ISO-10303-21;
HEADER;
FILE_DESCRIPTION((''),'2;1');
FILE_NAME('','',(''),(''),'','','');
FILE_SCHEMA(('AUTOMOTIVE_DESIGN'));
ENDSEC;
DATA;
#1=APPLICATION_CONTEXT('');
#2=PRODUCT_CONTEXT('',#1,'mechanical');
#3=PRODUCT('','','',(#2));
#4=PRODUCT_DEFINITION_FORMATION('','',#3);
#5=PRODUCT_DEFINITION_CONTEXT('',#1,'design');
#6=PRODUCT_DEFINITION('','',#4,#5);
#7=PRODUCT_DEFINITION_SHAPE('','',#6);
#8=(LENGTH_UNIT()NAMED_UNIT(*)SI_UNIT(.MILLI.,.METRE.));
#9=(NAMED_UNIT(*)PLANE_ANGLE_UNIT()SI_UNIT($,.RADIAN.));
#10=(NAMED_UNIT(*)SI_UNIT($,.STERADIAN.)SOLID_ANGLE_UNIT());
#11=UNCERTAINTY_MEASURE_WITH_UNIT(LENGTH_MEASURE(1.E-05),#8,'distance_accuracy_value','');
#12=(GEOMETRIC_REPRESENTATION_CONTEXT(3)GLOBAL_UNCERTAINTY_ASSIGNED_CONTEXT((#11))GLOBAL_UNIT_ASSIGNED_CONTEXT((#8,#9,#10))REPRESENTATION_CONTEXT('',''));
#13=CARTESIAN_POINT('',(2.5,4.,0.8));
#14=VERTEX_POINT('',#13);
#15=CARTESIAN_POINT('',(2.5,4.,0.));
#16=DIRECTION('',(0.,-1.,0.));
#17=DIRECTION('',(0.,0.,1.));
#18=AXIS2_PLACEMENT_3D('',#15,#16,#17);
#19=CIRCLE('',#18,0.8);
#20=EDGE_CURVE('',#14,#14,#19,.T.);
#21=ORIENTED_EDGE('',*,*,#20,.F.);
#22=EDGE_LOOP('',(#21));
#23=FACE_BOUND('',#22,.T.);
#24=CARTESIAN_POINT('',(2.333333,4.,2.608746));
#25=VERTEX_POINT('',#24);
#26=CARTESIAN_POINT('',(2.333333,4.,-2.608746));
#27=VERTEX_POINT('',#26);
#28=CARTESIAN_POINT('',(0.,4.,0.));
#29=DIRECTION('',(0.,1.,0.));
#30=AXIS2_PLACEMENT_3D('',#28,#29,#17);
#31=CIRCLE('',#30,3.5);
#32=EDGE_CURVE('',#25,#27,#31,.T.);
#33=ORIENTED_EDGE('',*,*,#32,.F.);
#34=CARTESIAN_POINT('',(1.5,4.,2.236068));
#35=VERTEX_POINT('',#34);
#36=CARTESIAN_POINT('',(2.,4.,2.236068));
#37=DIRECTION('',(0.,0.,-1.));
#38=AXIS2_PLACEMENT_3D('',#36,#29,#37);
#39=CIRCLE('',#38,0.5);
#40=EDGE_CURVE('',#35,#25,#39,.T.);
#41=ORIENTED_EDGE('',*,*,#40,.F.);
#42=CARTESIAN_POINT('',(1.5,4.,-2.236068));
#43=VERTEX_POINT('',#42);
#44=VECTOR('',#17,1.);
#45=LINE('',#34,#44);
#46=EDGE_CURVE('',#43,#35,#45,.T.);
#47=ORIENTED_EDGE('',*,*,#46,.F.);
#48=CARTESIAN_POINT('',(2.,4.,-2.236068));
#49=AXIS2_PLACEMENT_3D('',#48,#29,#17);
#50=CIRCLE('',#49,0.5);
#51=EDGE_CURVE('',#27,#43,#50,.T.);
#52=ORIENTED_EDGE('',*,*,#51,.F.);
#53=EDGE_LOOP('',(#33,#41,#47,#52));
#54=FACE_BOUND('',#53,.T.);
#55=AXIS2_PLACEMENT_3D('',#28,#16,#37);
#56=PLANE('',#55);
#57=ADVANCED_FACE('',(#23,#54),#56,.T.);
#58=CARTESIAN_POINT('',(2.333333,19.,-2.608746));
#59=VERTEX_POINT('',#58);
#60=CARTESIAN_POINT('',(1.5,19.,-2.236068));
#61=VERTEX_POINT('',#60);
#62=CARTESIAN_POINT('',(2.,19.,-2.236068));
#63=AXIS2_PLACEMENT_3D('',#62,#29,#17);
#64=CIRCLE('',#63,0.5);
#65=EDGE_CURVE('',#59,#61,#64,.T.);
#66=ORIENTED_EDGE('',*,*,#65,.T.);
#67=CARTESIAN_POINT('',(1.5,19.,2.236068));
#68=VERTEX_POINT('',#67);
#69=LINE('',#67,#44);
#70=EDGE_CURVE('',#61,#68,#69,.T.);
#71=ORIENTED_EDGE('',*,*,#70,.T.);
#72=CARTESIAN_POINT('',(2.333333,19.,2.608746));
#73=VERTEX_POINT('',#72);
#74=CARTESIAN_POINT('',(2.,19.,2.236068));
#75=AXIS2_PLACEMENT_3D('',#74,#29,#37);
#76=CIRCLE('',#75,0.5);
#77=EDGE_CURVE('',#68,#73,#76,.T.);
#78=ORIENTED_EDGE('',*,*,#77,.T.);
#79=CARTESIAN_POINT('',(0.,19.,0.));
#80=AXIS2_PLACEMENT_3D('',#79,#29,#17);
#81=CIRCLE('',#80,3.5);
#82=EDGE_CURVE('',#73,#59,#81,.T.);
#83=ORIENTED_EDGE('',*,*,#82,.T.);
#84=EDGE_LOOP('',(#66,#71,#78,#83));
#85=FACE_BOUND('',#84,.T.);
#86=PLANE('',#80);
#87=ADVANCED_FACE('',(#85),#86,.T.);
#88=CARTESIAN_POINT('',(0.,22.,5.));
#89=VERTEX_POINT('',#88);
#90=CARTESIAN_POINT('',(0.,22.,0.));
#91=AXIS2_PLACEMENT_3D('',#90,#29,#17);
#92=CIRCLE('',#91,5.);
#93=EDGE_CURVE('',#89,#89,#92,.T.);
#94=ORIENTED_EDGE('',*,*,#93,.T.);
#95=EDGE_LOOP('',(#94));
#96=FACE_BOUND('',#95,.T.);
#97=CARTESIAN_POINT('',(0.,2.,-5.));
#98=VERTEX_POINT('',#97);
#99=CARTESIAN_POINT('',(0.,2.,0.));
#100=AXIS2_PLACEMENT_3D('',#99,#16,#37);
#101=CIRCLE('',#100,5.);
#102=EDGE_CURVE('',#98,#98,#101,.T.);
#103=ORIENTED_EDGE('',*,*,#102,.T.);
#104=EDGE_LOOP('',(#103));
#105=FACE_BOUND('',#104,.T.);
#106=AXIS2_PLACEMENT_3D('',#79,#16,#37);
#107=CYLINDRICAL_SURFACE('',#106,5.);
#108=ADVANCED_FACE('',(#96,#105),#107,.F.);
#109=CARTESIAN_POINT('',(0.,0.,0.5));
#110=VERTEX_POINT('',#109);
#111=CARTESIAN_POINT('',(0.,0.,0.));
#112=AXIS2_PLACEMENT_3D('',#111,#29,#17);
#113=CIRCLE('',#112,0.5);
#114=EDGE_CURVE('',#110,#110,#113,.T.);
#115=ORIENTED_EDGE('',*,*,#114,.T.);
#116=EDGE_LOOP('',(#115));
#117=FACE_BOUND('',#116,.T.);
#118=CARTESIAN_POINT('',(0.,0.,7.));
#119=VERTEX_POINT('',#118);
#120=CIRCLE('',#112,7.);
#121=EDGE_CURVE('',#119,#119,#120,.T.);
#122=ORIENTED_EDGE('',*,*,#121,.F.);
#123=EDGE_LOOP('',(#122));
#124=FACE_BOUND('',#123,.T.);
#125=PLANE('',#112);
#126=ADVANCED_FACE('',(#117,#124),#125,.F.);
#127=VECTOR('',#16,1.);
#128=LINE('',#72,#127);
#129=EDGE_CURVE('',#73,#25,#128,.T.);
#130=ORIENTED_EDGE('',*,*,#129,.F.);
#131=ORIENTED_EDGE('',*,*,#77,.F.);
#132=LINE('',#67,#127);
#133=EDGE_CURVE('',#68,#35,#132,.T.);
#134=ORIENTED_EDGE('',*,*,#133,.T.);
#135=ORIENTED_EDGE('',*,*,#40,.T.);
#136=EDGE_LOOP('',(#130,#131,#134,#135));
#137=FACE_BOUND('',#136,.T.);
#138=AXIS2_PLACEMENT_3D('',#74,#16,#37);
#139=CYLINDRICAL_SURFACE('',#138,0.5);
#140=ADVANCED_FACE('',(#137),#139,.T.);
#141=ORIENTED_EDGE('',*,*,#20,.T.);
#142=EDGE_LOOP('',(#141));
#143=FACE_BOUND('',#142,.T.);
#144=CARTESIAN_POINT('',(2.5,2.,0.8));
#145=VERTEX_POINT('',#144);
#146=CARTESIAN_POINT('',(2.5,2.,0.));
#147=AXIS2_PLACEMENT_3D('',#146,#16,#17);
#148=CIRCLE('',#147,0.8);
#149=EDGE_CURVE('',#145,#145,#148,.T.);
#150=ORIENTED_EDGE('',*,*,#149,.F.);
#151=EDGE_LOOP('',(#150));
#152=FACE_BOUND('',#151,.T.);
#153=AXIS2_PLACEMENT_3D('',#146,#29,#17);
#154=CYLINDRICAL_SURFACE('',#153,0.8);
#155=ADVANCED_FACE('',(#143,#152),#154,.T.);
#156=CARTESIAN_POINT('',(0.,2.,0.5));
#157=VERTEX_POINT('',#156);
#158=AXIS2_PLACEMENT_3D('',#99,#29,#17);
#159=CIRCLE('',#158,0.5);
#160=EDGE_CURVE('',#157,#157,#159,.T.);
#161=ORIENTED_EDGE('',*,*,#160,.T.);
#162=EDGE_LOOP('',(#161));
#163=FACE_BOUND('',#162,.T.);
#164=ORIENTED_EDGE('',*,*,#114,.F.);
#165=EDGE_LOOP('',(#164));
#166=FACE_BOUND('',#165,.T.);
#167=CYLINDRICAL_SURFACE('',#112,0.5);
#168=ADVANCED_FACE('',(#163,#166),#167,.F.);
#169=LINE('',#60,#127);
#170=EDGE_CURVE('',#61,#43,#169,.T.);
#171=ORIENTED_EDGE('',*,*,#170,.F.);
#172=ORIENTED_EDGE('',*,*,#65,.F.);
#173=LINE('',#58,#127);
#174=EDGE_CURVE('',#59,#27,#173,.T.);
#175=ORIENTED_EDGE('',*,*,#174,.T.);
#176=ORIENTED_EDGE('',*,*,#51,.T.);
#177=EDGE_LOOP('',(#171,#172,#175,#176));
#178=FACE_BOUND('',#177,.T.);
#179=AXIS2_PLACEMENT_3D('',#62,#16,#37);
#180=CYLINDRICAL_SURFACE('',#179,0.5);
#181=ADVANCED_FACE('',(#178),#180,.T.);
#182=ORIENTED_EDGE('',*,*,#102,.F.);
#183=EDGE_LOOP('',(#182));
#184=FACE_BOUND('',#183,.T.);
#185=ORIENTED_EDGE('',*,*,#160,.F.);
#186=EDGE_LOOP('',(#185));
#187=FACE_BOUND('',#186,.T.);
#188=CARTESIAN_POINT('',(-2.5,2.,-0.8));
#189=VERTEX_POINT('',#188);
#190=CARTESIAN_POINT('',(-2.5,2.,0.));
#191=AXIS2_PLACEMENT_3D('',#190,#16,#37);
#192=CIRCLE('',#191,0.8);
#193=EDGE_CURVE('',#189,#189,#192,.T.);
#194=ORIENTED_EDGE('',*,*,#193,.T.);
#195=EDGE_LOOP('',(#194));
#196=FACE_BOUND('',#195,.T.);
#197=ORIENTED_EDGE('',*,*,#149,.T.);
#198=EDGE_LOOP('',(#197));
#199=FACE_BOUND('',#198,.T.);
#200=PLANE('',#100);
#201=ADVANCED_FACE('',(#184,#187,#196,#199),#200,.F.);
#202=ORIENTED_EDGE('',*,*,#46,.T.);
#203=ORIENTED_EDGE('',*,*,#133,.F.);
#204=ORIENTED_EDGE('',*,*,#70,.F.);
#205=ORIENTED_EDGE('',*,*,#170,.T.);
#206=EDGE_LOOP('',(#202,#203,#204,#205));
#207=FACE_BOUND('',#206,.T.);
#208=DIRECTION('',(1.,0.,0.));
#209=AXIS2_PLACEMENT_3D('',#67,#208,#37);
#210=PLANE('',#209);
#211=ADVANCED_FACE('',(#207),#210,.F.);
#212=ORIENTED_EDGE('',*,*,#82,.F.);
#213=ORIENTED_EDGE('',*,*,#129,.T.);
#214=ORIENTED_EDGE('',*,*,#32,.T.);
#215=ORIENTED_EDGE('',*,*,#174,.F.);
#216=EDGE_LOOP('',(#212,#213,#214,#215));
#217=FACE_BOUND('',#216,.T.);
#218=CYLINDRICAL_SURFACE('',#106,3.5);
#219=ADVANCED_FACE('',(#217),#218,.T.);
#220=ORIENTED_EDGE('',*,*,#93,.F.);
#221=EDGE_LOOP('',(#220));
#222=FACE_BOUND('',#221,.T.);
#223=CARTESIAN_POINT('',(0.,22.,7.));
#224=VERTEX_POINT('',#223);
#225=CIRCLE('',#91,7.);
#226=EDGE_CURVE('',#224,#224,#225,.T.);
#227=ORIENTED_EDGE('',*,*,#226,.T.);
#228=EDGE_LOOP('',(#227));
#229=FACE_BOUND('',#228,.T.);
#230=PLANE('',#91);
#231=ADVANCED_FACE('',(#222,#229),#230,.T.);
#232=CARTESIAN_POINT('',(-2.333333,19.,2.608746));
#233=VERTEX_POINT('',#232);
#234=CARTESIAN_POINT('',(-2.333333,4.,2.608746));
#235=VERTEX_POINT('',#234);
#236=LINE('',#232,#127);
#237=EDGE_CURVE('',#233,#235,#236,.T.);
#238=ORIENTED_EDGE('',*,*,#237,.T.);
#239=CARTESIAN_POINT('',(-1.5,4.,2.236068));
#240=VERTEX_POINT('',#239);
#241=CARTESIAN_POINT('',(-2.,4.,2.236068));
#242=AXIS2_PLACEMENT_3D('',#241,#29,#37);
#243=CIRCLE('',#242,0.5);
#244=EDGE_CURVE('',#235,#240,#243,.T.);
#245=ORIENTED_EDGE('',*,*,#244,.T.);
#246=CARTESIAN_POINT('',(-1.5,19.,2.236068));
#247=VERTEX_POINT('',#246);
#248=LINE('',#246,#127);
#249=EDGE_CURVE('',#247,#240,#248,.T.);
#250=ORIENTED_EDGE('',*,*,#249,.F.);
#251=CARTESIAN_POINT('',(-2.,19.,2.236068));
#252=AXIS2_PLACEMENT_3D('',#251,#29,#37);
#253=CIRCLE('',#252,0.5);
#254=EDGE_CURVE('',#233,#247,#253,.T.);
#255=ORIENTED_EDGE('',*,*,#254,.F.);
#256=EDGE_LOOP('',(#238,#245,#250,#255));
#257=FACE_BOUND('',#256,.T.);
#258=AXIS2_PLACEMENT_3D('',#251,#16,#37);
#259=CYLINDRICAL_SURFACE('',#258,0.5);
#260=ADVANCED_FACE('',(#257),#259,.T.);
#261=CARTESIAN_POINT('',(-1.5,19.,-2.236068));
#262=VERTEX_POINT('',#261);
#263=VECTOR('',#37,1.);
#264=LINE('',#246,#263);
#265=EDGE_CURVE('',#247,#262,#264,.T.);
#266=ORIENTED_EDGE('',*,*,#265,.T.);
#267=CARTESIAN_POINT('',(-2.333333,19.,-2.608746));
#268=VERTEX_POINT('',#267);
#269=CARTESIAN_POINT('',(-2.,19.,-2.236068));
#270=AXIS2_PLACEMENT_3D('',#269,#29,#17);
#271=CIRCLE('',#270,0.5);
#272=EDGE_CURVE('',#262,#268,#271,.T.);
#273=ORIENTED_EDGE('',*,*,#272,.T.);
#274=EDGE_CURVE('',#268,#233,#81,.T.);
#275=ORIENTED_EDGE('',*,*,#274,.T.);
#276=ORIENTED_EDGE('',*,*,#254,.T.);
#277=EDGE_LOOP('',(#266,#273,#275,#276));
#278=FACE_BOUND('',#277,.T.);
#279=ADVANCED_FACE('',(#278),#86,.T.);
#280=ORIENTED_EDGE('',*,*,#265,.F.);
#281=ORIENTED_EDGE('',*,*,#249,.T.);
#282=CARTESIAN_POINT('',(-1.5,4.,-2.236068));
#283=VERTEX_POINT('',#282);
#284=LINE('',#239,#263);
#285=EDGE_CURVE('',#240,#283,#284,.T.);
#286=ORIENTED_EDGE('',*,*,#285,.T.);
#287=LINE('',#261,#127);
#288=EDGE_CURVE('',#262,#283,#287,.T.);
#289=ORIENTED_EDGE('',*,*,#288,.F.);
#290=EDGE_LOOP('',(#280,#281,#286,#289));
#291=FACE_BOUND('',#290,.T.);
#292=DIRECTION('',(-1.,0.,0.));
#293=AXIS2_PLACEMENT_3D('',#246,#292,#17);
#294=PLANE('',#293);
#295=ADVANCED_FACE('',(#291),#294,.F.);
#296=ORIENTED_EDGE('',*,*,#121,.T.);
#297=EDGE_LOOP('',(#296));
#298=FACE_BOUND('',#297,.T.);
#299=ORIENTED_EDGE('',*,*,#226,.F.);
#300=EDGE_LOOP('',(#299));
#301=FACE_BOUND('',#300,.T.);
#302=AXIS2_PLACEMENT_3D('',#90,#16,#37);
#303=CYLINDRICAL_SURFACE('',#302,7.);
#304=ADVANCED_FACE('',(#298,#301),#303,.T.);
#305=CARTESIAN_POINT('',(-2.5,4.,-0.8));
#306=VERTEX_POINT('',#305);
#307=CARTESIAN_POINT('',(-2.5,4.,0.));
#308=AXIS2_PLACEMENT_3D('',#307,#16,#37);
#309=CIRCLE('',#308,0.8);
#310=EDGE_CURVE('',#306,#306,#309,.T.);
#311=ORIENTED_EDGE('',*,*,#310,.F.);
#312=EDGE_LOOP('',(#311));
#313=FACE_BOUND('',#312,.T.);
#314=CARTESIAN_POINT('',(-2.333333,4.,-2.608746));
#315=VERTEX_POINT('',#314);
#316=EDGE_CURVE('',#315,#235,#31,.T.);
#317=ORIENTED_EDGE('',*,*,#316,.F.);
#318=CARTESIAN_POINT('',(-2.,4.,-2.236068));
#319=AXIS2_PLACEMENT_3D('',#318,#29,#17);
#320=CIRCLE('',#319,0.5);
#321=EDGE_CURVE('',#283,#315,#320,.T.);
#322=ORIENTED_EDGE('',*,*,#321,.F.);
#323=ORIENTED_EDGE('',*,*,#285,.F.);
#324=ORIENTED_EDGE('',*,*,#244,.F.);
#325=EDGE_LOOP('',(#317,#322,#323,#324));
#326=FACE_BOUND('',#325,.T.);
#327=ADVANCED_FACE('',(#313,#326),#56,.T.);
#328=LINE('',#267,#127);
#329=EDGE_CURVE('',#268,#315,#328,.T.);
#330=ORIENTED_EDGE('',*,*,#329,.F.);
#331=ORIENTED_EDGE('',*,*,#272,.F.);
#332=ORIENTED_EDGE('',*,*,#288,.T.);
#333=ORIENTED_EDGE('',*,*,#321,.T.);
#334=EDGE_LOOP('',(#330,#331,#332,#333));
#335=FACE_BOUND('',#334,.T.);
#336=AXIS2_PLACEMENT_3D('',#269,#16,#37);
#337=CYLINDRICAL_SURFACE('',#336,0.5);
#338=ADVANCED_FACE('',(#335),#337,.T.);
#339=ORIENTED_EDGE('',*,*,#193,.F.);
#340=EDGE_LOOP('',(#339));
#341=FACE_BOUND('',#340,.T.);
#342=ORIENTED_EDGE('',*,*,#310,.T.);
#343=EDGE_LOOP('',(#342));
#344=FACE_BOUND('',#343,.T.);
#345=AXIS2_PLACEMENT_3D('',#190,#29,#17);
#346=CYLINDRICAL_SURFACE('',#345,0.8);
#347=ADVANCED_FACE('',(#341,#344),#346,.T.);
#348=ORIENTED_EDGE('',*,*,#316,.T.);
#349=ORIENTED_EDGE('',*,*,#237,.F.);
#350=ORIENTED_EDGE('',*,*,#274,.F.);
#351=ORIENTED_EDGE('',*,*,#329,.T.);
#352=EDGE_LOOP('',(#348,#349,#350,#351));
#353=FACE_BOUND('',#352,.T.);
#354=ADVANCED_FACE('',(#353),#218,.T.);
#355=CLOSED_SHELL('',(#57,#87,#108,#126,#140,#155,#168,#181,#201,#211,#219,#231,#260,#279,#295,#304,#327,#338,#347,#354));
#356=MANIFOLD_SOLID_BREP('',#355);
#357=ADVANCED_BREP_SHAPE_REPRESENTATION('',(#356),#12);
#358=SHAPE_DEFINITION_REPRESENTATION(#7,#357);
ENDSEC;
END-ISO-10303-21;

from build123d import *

# Parameters (mm, degrees)
SKETCH1_R           = 7
BOSS_EXTRUDE1_DEPTH = 22
CAVITY1_START       = 2
CAVITY1_OUTLINE_R   = 5
CAVITY1_DEPTH       = 20
CAVITY1_START_2     = 19
CAVITY1_2_DEPTH     = 3
CAVITY1_3_OUTLINE_R = 0.8
CAVITY1_3_DEPTH     = 2
SKETCH2_R           = 0.5
CUT_EXTRUDE1_DEPTH  = 23.315913604


# Read off the part's stored shape, not the designer's step: Cavity1
with BuildPart() as part:
    # Sketch1 → Boss-Extrude1 (new body)
    with BuildSketch(Plane(origin=(0, 0, 0), x_dir=(1, 0, 0), z_dir=(0, 1, 0))):
        with Locations(Location((0, 0, 0), (0, 0, 270))):
            Circle(SKETCH1_R)
    extrude(amount=BOSS_EXTRUDE1_DEPTH)

    # Cavity1 outline → Cavity1 (cut)
    with BuildSketch(Plane(origin=(0, 0, 0), x_dir=(1, 0, 0), z_dir=(0, 1, 0)).offset(CAVITY1_START)):
        Circle(CAVITY1_OUTLINE_R)
        with BuildLine():
            ThreePointArc((-1.5, -2.236067977), (-1.795875854, -2.692503442), (-2.333333333, -2.608745974))
            ThreePointArc((-2.333333333, -2.608745974), (-3.5, 0), (-2.333333333, 2.608745974))
            ThreePointArc((-2.333333333, 2.608745974), (-1.795875854, 2.692503442), (-1.5, 2.236067977))
            Line((-1.5, 2.236067977), (-1.5, -2.236067977))
        make_face(mode=Mode.SUBTRACT)
        with BuildLine():
            Line((1.5, -2.236067977), (1.5, 2.236067977))
            ThreePointArc((1.5, 2.236067977), (1.795875854, 2.692503442), (2.333333333, 2.608745974))
            ThreePointArc((2.333333333, 2.608745974), (3.5, 0), (2.333333333, -2.608745974))
            ThreePointArc((2.333333333, -2.608745974), (1.795875854, -2.692503442), (1.5, -2.236067977))
        make_face(mode=Mode.SUBTRACT)
    extrude(amount=CAVITY1_DEPTH, mode=Mode.SUBTRACT)

    # Cavity1 2 outline → Cavity1 2 (cut)
    with BuildSketch(Plane(origin=(0, 0, 0), x_dir=(1, 0, 0), z_dir=(0, 1, 0)).offset(CAVITY1_START_2)):
        with BuildLine():
            ThreePointArc((2.333333333, 2.608745974), (1.795875854, 2.692503442), (1.5, 2.236067977))
            Line((1.5, 2.236067977), (1.5, -2.236067977))
            ThreePointArc((1.5, -2.236067977), (1.795875854, -2.692503442), (2.333333333, -2.608745974))
            ThreePointArc((2.333333333, -2.608745974), (3.5, 0), (2.333333333, 2.608745974))
        make_face()
        with BuildLine():
            ThreePointArc((-2.333333333, 2.608745974), (-3.5, 0), (-2.333333333, -2.608745974))
            ThreePointArc((-2.333333333, -2.608745974), (-1.795875854, -2.692503442), (-1.5, -2.236067977))
            Line((-1.5, -2.236067977), (-1.5, 2.236067977))
            ThreePointArc((-1.5, 2.236067977), (-1.795875854, 2.692503442), (-2.333333333, 2.608745974))
        make_face()
    extrude(amount=CAVITY1_2_DEPTH, mode=Mode.SUBTRACT)

    # Cavity1 3 outline → Cavity1 3 (cut)
    # profile 1 of 2: a face of its own
    with BuildSketch(Plane(origin=(0, 0, 0), x_dir=(1, 0, 0), z_dir=(0, 1, 0)).offset(CAVITY1_START)):
        with BuildLine():
            ThreePointArc((2.333333333, 2.608745974), (1.795875854, 2.692503442), (1.5, 2.236067977))
            Line((1.5, 2.236067977), (1.5, -2.236067977))
            ThreePointArc((1.5, -2.236067977), (1.795875854, -2.692503442), (2.333333333, -2.608745974))
            ThreePointArc((2.333333333, -2.608745974), (3.5, 0), (2.333333333, 2.608745974))
        make_face()
        with Locations((2.5, 0)):
            Circle(CAVITY1_3_OUTLINE_R, mode=Mode.SUBTRACT)
    # profile 2 of 2: a face of its own
    with BuildSketch(Plane(origin=(0, 0, 0), x_dir=(1, 0, 0), z_dir=(0, 1, 0)).offset(CAVITY1_START)):
        with BuildLine():
            ThreePointArc((-2.333333333, 2.608745974), (-3.5, 0), (-2.333333333, -2.608745974))
            ThreePointArc((-2.333333333, -2.608745974), (-1.795875854, -2.692503442), (-1.5, -2.236067977))
            Line((-1.5, -2.236067977), (-1.5, 2.236067977))
            ThreePointArc((-1.5, 2.236067977), (-1.795875854, 2.692503442), (-2.333333333, 2.608745974))
        make_face()
        with Locations((-2.5, 0)):
            Circle(CAVITY1_3_OUTLINE_R, mode=Mode.SUBTRACT)
    extrude(amount=CAVITY1_3_DEPTH, mode=Mode.SUBTRACT)

    # Sketch2 → Cut-Extrude1 (cut, through all)
    with BuildSketch(Plane(origin=(0, 2, 0), x_dir=(1, 0, 0), z_dir=(0, 1, 0))):
        with Locations(Location((0, 0, 0), (0, 0, 270))):
            Circle(SKETCH2_R)
    extrude(amount=-CUT_EXTRUDE1_DEPTH, mode=Mode.SUBTRACT)


solid = part.part
